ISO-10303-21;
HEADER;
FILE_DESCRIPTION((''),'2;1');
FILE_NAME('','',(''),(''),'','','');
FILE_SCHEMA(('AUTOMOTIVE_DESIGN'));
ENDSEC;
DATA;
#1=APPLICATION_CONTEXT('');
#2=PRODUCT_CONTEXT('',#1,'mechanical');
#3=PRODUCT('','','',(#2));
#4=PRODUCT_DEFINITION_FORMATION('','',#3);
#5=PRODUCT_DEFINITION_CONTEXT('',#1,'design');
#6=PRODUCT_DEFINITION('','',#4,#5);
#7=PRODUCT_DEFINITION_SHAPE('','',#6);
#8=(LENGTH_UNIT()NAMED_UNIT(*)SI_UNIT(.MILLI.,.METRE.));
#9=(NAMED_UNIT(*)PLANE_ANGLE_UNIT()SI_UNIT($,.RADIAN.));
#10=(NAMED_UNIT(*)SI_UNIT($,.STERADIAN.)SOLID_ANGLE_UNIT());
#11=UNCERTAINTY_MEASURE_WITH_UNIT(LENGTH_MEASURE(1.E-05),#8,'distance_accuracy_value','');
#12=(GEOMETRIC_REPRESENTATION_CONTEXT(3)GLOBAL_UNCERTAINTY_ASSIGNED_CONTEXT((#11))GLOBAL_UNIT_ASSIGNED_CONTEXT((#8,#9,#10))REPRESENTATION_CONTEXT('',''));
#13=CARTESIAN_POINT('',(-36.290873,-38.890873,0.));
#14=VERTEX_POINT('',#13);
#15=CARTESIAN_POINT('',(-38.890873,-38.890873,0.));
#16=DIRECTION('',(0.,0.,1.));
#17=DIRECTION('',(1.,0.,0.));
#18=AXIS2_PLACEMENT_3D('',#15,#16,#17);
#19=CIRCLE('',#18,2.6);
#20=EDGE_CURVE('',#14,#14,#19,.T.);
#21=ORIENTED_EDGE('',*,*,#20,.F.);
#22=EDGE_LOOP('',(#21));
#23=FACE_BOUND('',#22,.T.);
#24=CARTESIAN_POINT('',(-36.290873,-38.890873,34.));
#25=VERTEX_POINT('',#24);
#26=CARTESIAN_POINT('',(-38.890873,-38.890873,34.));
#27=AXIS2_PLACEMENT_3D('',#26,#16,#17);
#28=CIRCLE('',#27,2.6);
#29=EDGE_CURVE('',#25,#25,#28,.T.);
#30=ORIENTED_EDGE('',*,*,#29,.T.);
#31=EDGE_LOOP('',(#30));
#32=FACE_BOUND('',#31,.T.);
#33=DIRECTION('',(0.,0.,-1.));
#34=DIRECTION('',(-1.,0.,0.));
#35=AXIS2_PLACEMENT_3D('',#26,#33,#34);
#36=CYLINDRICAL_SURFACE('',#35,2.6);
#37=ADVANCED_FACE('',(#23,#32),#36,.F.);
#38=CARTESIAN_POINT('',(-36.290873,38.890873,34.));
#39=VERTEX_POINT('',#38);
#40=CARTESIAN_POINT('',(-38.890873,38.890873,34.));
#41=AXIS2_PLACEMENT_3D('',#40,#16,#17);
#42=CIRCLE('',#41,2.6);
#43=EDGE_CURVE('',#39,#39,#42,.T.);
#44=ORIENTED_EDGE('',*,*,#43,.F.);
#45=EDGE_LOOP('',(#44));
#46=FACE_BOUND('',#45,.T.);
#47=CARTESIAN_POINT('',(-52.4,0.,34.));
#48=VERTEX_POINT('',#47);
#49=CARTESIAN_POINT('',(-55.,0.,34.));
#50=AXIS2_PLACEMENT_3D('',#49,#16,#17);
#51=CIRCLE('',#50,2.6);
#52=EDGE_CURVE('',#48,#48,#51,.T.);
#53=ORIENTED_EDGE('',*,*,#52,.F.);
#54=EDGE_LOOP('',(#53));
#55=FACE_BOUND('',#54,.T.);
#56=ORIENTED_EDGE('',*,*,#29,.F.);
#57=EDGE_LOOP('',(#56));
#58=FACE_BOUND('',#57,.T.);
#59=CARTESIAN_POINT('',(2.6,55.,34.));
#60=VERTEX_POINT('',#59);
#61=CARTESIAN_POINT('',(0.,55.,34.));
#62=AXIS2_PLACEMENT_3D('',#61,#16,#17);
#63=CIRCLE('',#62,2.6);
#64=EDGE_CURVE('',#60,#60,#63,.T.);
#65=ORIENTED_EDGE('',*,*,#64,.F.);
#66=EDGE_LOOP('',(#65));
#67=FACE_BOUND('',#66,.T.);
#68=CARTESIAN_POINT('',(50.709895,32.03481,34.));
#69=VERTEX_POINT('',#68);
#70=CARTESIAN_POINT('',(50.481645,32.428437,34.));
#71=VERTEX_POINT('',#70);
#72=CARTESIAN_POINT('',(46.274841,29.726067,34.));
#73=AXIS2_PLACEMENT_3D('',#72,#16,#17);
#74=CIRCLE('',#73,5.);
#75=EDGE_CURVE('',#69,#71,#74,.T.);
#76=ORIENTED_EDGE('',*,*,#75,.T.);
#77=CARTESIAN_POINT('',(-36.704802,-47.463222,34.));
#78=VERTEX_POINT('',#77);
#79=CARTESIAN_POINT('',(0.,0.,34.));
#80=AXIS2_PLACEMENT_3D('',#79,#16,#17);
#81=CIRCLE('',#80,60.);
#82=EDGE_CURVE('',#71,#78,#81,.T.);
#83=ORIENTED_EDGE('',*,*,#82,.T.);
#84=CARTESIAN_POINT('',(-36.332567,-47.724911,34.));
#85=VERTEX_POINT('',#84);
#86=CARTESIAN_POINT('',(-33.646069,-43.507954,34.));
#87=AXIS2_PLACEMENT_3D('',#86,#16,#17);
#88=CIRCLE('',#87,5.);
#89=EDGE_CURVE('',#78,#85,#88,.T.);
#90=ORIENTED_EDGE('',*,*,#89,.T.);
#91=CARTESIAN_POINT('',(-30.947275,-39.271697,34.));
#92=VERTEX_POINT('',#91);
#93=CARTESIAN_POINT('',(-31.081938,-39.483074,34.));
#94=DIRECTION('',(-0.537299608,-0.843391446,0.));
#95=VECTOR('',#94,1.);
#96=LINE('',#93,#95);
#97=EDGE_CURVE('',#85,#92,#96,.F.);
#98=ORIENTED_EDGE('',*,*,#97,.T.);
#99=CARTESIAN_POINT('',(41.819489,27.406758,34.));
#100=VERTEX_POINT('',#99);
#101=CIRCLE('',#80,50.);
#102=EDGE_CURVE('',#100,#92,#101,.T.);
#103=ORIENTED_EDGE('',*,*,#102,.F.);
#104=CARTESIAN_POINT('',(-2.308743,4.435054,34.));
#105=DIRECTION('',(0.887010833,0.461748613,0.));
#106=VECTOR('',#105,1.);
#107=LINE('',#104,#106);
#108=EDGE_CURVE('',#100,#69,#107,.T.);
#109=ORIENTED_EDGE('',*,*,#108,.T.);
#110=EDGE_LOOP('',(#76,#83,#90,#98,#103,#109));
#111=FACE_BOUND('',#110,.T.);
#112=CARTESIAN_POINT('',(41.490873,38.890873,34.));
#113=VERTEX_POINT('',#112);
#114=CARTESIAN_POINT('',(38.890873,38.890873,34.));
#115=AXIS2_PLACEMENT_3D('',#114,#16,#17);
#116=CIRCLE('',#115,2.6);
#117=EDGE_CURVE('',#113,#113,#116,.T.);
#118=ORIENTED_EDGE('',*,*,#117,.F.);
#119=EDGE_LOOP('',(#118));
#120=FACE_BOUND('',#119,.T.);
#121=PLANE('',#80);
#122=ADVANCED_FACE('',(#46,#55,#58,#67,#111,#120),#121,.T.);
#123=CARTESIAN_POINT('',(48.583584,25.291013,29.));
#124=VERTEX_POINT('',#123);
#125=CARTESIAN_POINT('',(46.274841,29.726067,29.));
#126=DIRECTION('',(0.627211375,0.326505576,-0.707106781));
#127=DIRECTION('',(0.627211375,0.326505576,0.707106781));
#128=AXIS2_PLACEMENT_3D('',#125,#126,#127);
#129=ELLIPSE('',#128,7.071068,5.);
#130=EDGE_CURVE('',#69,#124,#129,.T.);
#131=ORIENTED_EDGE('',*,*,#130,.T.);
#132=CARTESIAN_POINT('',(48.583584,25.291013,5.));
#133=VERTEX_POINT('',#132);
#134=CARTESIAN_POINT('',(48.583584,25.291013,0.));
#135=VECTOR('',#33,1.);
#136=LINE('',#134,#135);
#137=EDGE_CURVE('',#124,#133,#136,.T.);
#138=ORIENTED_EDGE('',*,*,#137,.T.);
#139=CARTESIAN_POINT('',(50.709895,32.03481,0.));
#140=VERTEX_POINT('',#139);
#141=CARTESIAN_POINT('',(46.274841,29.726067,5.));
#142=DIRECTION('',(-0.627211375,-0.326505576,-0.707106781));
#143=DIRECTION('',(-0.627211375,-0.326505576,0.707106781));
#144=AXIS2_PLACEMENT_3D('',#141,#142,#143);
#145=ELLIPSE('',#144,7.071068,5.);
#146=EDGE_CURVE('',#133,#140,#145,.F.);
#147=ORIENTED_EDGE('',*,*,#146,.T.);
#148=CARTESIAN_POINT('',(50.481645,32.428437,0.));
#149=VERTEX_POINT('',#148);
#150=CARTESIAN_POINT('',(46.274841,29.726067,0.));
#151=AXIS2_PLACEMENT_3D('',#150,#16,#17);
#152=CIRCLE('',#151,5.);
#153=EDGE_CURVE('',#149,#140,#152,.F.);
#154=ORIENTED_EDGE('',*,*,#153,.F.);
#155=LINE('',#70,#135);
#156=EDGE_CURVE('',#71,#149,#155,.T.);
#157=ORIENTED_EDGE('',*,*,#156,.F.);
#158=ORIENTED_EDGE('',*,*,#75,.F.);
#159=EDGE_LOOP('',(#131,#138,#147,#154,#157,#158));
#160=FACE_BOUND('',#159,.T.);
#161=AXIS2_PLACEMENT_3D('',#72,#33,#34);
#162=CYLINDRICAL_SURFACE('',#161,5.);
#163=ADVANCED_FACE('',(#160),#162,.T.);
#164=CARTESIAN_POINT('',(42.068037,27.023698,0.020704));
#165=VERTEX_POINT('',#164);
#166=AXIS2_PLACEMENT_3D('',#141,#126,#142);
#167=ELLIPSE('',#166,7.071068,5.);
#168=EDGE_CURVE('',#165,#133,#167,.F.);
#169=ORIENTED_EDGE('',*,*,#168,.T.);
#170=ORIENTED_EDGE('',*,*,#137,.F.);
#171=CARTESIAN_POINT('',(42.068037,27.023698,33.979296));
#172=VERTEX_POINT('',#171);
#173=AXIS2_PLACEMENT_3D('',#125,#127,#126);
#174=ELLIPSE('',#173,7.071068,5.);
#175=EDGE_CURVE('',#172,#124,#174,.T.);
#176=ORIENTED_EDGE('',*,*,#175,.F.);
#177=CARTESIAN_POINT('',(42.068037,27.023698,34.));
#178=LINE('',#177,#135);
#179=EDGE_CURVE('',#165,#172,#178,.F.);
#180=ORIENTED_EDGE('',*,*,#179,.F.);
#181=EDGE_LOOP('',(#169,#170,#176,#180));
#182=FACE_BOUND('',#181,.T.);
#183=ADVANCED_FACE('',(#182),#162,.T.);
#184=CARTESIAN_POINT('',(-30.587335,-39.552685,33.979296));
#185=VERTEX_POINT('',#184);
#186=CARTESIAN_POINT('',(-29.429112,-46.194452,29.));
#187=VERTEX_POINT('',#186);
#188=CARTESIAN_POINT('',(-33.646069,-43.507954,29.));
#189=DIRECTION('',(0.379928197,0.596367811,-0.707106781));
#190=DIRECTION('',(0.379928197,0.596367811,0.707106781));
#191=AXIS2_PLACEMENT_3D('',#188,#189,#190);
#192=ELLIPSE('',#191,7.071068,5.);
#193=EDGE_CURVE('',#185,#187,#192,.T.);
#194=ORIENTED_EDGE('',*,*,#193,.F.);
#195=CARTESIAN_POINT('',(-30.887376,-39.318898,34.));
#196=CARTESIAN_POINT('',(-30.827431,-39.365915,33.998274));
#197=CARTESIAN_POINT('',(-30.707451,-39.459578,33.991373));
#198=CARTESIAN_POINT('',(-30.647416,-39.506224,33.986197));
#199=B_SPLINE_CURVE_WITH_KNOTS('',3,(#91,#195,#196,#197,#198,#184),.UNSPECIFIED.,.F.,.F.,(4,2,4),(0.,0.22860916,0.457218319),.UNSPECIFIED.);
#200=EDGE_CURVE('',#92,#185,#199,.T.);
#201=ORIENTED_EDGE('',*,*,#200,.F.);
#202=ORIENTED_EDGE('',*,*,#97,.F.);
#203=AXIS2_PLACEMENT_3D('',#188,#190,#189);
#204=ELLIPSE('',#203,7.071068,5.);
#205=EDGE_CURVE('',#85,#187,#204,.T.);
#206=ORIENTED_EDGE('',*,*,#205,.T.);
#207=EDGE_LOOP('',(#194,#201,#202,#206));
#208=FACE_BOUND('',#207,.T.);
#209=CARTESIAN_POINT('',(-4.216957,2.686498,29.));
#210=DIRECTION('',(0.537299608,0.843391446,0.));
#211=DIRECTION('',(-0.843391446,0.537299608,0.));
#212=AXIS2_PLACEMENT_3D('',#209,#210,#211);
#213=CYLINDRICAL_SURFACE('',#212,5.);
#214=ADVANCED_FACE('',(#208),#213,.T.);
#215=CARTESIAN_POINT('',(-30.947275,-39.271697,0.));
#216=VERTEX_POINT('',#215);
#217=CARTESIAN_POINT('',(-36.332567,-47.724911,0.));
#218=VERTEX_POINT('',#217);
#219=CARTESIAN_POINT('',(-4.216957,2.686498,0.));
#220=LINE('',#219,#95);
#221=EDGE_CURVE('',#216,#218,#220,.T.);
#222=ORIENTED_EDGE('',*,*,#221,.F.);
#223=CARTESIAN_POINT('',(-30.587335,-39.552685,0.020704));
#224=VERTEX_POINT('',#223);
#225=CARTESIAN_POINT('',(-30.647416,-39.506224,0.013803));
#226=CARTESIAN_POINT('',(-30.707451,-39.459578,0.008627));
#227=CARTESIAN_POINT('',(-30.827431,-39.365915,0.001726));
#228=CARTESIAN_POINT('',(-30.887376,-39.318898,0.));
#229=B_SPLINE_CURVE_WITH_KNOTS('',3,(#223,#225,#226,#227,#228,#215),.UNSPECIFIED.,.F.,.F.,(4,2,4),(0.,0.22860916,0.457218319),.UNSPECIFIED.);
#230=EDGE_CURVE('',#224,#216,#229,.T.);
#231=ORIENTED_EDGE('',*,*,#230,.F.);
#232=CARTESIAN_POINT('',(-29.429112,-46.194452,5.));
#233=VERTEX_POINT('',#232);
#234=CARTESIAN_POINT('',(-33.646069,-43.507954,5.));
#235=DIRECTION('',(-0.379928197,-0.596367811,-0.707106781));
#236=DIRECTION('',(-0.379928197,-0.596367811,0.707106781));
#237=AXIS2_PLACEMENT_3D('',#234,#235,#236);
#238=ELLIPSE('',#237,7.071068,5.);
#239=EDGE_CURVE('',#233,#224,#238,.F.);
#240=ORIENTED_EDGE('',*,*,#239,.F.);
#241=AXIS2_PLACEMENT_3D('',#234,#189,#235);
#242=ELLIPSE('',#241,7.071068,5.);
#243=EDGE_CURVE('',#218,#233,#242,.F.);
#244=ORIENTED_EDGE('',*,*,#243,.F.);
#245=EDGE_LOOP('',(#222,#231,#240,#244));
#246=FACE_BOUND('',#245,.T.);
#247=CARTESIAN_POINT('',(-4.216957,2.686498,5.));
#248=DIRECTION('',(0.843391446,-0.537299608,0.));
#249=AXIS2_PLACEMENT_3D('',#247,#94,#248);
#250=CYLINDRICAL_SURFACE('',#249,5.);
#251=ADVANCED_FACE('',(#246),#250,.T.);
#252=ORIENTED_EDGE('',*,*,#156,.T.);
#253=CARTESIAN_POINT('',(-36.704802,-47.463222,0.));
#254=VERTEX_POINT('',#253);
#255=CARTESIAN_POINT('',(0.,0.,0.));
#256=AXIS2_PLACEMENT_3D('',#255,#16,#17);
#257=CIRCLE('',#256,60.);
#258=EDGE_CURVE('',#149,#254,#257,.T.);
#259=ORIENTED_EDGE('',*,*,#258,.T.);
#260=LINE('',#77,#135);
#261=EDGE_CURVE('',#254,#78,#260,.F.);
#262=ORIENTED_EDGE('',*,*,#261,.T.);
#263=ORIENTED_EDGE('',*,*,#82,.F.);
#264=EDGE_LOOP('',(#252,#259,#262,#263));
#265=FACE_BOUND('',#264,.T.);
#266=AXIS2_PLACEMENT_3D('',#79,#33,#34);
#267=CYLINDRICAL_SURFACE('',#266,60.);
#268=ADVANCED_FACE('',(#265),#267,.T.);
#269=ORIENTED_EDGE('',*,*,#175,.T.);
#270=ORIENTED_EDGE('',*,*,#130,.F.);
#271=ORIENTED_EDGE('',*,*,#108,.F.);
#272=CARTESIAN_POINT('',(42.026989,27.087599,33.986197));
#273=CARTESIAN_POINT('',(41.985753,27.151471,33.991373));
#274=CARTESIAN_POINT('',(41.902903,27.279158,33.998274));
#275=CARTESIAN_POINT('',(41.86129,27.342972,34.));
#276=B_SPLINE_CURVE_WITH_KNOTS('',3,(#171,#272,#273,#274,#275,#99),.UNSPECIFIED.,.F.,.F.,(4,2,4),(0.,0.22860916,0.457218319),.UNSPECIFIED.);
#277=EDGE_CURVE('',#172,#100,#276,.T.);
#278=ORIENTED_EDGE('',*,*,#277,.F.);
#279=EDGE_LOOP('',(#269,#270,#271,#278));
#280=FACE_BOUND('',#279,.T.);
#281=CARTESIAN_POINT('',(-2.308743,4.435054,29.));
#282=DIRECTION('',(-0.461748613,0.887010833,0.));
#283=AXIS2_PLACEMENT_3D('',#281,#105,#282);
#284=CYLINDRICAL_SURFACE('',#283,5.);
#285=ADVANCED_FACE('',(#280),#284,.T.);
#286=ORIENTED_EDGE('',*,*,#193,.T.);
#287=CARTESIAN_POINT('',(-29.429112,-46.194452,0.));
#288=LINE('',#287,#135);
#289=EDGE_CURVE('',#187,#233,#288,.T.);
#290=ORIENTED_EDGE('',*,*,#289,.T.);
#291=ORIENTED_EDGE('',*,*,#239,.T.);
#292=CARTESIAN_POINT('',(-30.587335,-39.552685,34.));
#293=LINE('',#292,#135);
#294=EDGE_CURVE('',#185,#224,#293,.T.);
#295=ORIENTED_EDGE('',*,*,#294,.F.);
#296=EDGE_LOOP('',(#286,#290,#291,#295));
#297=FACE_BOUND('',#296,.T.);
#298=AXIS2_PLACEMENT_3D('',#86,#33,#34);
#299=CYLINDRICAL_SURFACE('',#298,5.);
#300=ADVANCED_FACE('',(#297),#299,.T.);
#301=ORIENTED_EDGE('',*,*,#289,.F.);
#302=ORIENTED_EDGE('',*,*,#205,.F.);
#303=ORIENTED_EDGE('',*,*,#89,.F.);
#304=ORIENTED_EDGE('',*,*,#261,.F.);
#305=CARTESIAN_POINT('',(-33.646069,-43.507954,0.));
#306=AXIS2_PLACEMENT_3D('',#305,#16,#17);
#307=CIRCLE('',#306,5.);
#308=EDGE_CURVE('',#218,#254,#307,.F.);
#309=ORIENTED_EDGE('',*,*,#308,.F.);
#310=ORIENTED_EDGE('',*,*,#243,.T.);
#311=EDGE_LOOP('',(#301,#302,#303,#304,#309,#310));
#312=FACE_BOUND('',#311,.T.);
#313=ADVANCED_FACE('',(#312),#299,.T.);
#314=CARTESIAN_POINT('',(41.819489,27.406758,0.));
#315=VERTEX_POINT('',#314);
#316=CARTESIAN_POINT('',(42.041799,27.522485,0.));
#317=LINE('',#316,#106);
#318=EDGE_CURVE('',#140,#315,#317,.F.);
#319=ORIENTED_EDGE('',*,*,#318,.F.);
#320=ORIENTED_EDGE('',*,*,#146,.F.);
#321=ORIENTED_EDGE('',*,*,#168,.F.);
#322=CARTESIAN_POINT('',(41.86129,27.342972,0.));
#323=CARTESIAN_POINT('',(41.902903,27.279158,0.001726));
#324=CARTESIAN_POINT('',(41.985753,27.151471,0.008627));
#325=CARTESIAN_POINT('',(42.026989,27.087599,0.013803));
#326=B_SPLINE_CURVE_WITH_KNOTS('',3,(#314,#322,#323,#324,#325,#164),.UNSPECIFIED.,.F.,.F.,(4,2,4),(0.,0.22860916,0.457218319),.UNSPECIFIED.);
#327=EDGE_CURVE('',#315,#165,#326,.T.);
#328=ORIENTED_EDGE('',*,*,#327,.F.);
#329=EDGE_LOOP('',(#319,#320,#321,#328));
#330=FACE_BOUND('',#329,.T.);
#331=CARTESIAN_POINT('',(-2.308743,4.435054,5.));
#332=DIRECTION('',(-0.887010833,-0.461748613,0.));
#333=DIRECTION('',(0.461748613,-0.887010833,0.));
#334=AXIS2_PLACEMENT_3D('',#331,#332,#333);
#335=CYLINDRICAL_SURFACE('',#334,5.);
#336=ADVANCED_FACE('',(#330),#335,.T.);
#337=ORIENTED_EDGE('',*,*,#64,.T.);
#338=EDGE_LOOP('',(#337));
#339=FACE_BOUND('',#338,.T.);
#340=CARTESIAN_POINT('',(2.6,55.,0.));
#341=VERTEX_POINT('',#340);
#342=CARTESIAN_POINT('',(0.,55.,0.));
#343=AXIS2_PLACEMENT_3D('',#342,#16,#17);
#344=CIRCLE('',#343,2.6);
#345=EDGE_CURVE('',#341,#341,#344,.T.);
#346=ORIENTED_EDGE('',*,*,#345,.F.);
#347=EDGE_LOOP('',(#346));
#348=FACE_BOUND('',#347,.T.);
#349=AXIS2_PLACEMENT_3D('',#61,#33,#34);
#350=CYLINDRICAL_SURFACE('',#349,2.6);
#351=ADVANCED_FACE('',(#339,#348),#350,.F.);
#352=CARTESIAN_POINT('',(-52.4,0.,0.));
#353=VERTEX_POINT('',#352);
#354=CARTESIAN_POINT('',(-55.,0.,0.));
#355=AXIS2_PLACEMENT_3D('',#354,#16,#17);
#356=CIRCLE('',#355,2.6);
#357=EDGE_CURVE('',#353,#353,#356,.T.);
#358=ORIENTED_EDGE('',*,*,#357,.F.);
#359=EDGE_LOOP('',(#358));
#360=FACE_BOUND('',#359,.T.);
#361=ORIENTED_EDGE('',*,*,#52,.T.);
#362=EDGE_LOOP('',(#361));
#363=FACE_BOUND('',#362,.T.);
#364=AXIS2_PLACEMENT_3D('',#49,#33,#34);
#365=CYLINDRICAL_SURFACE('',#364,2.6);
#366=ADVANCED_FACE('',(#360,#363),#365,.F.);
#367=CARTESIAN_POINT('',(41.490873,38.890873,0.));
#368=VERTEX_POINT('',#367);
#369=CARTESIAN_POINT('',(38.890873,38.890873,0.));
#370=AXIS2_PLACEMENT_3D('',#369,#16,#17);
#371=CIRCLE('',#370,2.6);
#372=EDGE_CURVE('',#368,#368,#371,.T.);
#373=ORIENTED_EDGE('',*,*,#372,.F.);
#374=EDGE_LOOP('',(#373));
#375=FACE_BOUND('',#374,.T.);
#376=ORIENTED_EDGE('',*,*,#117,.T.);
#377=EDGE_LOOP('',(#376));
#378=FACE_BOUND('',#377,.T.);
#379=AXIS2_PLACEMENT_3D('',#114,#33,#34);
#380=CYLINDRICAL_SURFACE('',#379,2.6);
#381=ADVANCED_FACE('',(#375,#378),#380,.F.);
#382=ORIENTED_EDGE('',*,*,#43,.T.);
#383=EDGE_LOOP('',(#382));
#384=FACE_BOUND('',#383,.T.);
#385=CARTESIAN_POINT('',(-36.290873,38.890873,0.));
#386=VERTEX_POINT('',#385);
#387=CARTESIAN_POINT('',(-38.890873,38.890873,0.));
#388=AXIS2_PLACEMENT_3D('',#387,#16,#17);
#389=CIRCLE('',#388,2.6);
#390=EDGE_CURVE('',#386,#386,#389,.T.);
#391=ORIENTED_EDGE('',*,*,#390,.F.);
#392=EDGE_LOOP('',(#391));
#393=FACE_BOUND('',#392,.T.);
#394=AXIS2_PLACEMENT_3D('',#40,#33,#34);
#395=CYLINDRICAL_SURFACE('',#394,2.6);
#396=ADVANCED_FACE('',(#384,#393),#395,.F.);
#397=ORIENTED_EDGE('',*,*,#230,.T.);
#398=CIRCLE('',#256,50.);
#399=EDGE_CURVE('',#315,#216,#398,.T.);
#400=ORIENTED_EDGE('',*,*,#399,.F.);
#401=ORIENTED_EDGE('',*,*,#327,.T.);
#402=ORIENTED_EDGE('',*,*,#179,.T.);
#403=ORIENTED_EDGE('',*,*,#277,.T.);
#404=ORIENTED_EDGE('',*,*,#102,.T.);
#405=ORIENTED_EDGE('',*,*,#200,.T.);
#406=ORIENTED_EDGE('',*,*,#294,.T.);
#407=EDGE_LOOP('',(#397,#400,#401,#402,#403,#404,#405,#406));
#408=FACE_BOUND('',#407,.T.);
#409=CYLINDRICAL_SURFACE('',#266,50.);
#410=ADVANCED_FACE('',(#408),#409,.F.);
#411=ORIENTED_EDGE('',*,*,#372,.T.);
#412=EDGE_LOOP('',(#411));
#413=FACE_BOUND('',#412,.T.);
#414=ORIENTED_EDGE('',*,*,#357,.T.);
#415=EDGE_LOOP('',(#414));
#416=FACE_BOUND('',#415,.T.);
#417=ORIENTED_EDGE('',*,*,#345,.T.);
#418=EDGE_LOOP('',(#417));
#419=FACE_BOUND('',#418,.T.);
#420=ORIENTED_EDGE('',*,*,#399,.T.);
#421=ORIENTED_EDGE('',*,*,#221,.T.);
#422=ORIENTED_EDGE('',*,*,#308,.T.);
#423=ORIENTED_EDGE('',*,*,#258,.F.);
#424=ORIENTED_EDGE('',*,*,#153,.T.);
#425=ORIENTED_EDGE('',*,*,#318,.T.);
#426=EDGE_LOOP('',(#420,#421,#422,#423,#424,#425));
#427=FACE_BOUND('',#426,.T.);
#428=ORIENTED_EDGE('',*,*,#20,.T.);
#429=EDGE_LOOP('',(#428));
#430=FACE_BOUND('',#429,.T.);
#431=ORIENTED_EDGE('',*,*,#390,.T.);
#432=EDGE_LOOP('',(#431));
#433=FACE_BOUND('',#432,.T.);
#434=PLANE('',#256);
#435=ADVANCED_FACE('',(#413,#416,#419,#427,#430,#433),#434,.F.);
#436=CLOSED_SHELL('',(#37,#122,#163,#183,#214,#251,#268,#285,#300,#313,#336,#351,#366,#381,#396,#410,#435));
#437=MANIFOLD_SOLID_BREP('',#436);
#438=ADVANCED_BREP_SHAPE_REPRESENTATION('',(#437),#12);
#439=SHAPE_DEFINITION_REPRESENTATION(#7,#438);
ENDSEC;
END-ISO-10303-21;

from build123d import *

# Parameters (mm, degrees)
SKETCH_2_R          = 60
SKETCH_2_R_2        = 2.6
SKETCH_2_R_3        = 50
EXTRUDE_1_DEPTH     = 34
CUT_EXTRUDE_START   = -34
SKETCH_3_R          = 2.6
CUT_EXTRUDE_1_DEPTH = 34
FILLET_1_R          = 5


with BuildPart() as part:
    # 草图2 → 凸台-拉伸1 (new body)
    with BuildSketch(Plane.XY):
        Circle(SKETCH_2_R)
        with Locations((0, 55)):
            Circle(SKETCH_2_R_2, mode=Mode.SUBTRACT)
        with Locations((38.890872965, 38.890872965)):
            Circle(SKETCH_2_R_2, mode=Mode.SUBTRACT)
        with Locations((55, 0)):
            Circle(SKETCH_2_R_2, mode=Mode.SUBTRACT)
        with Locations((38.890872965, -38.890872965)):
            Circle(SKETCH_2_R_2, mode=Mode.SUBTRACT)
        with Locations((0, -55)):
            Circle(SKETCH_2_R_2, mode=Mode.SUBTRACT)
        with Locations((-38.890872965, -38.890872965)):
            Circle(SKETCH_2_R_2, mode=Mode.SUBTRACT)
        with Locations((-55, 0)):
            Circle(SKETCH_2_R_2, mode=Mode.SUBTRACT)
        with Locations((-38.890872965, 38.890872965)):
            Circle(SKETCH_2_R_2, mode=Mode.SUBTRACT)
        Circle(SKETCH_2_R_3, mode=Mode.SUBTRACT)
    extrude(amount=EXTRUDE_1_DEPTH)

    # 草图3 → 切除-拉伸1 (cut)
    with BuildSketch(Plane.XY.offset(34).offset(CUT_EXTRUDE_START)):
        with BuildLine():
            Line((53.220649991, 27.704916794), (44.350541659, 23.087430662))
            ThreePointArc((44.350541659, 23.087430662), (48.567103491, 11.884294616), (50, 0))
            ThreePointArc((50, 0), (24.049438446, -43.836337785), (-26.864980417, -42.169572291))
            Line((-26.864980417, -42.169572291), (-32.237976501, -50.603486749))
            ThreePointArc((-32.237976501, -50.603486749), (28.859326135, -52.603605342), (60, 0))
            ThreePointArc((60, 0), (58.280524189, 14.26115354), (53.220649991, 27.704916794))
        make_face()
        with Locations((0, -55)):
            Circle(SKETCH_3_R, mode=Mode.SUBTRACT)
        with Locations((38.890872965, -38.890872965)):
            Circle(SKETCH_3_R, mode=Mode.SUBTRACT)
        with Locations((55, 0)):
            Circle(SKETCH_3_R, mode=Mode.SUBTRACT)
    extrude(amount=CUT_EXTRUDE_1_DEPTH, mode=Mode.SUBTRACT)

    # 圆角1
    fillet_1_edges = [part.edges().sort_by_distance(p)[0] for p in [
        (-26.864980417, -42.169572291, 17),
        (48.785595825, 25.396173728, 34),
        (44.350541659, 23.087430662, 17),
        (53.220649991, 27.704916794, 17),
        (-29.551478459, -46.38652952, 0),
        (-32.237976501, -50.603486749, 17),
        (48.785595825, 25.396173728, 0),
        (-29.551478459, -46.38652952, 34),
    ]]
    fillet(fillet_1_edges, radius=FILLET_1_R - 0.0001)  # a hair under: the kernel refuses the full size


solid = part.part
